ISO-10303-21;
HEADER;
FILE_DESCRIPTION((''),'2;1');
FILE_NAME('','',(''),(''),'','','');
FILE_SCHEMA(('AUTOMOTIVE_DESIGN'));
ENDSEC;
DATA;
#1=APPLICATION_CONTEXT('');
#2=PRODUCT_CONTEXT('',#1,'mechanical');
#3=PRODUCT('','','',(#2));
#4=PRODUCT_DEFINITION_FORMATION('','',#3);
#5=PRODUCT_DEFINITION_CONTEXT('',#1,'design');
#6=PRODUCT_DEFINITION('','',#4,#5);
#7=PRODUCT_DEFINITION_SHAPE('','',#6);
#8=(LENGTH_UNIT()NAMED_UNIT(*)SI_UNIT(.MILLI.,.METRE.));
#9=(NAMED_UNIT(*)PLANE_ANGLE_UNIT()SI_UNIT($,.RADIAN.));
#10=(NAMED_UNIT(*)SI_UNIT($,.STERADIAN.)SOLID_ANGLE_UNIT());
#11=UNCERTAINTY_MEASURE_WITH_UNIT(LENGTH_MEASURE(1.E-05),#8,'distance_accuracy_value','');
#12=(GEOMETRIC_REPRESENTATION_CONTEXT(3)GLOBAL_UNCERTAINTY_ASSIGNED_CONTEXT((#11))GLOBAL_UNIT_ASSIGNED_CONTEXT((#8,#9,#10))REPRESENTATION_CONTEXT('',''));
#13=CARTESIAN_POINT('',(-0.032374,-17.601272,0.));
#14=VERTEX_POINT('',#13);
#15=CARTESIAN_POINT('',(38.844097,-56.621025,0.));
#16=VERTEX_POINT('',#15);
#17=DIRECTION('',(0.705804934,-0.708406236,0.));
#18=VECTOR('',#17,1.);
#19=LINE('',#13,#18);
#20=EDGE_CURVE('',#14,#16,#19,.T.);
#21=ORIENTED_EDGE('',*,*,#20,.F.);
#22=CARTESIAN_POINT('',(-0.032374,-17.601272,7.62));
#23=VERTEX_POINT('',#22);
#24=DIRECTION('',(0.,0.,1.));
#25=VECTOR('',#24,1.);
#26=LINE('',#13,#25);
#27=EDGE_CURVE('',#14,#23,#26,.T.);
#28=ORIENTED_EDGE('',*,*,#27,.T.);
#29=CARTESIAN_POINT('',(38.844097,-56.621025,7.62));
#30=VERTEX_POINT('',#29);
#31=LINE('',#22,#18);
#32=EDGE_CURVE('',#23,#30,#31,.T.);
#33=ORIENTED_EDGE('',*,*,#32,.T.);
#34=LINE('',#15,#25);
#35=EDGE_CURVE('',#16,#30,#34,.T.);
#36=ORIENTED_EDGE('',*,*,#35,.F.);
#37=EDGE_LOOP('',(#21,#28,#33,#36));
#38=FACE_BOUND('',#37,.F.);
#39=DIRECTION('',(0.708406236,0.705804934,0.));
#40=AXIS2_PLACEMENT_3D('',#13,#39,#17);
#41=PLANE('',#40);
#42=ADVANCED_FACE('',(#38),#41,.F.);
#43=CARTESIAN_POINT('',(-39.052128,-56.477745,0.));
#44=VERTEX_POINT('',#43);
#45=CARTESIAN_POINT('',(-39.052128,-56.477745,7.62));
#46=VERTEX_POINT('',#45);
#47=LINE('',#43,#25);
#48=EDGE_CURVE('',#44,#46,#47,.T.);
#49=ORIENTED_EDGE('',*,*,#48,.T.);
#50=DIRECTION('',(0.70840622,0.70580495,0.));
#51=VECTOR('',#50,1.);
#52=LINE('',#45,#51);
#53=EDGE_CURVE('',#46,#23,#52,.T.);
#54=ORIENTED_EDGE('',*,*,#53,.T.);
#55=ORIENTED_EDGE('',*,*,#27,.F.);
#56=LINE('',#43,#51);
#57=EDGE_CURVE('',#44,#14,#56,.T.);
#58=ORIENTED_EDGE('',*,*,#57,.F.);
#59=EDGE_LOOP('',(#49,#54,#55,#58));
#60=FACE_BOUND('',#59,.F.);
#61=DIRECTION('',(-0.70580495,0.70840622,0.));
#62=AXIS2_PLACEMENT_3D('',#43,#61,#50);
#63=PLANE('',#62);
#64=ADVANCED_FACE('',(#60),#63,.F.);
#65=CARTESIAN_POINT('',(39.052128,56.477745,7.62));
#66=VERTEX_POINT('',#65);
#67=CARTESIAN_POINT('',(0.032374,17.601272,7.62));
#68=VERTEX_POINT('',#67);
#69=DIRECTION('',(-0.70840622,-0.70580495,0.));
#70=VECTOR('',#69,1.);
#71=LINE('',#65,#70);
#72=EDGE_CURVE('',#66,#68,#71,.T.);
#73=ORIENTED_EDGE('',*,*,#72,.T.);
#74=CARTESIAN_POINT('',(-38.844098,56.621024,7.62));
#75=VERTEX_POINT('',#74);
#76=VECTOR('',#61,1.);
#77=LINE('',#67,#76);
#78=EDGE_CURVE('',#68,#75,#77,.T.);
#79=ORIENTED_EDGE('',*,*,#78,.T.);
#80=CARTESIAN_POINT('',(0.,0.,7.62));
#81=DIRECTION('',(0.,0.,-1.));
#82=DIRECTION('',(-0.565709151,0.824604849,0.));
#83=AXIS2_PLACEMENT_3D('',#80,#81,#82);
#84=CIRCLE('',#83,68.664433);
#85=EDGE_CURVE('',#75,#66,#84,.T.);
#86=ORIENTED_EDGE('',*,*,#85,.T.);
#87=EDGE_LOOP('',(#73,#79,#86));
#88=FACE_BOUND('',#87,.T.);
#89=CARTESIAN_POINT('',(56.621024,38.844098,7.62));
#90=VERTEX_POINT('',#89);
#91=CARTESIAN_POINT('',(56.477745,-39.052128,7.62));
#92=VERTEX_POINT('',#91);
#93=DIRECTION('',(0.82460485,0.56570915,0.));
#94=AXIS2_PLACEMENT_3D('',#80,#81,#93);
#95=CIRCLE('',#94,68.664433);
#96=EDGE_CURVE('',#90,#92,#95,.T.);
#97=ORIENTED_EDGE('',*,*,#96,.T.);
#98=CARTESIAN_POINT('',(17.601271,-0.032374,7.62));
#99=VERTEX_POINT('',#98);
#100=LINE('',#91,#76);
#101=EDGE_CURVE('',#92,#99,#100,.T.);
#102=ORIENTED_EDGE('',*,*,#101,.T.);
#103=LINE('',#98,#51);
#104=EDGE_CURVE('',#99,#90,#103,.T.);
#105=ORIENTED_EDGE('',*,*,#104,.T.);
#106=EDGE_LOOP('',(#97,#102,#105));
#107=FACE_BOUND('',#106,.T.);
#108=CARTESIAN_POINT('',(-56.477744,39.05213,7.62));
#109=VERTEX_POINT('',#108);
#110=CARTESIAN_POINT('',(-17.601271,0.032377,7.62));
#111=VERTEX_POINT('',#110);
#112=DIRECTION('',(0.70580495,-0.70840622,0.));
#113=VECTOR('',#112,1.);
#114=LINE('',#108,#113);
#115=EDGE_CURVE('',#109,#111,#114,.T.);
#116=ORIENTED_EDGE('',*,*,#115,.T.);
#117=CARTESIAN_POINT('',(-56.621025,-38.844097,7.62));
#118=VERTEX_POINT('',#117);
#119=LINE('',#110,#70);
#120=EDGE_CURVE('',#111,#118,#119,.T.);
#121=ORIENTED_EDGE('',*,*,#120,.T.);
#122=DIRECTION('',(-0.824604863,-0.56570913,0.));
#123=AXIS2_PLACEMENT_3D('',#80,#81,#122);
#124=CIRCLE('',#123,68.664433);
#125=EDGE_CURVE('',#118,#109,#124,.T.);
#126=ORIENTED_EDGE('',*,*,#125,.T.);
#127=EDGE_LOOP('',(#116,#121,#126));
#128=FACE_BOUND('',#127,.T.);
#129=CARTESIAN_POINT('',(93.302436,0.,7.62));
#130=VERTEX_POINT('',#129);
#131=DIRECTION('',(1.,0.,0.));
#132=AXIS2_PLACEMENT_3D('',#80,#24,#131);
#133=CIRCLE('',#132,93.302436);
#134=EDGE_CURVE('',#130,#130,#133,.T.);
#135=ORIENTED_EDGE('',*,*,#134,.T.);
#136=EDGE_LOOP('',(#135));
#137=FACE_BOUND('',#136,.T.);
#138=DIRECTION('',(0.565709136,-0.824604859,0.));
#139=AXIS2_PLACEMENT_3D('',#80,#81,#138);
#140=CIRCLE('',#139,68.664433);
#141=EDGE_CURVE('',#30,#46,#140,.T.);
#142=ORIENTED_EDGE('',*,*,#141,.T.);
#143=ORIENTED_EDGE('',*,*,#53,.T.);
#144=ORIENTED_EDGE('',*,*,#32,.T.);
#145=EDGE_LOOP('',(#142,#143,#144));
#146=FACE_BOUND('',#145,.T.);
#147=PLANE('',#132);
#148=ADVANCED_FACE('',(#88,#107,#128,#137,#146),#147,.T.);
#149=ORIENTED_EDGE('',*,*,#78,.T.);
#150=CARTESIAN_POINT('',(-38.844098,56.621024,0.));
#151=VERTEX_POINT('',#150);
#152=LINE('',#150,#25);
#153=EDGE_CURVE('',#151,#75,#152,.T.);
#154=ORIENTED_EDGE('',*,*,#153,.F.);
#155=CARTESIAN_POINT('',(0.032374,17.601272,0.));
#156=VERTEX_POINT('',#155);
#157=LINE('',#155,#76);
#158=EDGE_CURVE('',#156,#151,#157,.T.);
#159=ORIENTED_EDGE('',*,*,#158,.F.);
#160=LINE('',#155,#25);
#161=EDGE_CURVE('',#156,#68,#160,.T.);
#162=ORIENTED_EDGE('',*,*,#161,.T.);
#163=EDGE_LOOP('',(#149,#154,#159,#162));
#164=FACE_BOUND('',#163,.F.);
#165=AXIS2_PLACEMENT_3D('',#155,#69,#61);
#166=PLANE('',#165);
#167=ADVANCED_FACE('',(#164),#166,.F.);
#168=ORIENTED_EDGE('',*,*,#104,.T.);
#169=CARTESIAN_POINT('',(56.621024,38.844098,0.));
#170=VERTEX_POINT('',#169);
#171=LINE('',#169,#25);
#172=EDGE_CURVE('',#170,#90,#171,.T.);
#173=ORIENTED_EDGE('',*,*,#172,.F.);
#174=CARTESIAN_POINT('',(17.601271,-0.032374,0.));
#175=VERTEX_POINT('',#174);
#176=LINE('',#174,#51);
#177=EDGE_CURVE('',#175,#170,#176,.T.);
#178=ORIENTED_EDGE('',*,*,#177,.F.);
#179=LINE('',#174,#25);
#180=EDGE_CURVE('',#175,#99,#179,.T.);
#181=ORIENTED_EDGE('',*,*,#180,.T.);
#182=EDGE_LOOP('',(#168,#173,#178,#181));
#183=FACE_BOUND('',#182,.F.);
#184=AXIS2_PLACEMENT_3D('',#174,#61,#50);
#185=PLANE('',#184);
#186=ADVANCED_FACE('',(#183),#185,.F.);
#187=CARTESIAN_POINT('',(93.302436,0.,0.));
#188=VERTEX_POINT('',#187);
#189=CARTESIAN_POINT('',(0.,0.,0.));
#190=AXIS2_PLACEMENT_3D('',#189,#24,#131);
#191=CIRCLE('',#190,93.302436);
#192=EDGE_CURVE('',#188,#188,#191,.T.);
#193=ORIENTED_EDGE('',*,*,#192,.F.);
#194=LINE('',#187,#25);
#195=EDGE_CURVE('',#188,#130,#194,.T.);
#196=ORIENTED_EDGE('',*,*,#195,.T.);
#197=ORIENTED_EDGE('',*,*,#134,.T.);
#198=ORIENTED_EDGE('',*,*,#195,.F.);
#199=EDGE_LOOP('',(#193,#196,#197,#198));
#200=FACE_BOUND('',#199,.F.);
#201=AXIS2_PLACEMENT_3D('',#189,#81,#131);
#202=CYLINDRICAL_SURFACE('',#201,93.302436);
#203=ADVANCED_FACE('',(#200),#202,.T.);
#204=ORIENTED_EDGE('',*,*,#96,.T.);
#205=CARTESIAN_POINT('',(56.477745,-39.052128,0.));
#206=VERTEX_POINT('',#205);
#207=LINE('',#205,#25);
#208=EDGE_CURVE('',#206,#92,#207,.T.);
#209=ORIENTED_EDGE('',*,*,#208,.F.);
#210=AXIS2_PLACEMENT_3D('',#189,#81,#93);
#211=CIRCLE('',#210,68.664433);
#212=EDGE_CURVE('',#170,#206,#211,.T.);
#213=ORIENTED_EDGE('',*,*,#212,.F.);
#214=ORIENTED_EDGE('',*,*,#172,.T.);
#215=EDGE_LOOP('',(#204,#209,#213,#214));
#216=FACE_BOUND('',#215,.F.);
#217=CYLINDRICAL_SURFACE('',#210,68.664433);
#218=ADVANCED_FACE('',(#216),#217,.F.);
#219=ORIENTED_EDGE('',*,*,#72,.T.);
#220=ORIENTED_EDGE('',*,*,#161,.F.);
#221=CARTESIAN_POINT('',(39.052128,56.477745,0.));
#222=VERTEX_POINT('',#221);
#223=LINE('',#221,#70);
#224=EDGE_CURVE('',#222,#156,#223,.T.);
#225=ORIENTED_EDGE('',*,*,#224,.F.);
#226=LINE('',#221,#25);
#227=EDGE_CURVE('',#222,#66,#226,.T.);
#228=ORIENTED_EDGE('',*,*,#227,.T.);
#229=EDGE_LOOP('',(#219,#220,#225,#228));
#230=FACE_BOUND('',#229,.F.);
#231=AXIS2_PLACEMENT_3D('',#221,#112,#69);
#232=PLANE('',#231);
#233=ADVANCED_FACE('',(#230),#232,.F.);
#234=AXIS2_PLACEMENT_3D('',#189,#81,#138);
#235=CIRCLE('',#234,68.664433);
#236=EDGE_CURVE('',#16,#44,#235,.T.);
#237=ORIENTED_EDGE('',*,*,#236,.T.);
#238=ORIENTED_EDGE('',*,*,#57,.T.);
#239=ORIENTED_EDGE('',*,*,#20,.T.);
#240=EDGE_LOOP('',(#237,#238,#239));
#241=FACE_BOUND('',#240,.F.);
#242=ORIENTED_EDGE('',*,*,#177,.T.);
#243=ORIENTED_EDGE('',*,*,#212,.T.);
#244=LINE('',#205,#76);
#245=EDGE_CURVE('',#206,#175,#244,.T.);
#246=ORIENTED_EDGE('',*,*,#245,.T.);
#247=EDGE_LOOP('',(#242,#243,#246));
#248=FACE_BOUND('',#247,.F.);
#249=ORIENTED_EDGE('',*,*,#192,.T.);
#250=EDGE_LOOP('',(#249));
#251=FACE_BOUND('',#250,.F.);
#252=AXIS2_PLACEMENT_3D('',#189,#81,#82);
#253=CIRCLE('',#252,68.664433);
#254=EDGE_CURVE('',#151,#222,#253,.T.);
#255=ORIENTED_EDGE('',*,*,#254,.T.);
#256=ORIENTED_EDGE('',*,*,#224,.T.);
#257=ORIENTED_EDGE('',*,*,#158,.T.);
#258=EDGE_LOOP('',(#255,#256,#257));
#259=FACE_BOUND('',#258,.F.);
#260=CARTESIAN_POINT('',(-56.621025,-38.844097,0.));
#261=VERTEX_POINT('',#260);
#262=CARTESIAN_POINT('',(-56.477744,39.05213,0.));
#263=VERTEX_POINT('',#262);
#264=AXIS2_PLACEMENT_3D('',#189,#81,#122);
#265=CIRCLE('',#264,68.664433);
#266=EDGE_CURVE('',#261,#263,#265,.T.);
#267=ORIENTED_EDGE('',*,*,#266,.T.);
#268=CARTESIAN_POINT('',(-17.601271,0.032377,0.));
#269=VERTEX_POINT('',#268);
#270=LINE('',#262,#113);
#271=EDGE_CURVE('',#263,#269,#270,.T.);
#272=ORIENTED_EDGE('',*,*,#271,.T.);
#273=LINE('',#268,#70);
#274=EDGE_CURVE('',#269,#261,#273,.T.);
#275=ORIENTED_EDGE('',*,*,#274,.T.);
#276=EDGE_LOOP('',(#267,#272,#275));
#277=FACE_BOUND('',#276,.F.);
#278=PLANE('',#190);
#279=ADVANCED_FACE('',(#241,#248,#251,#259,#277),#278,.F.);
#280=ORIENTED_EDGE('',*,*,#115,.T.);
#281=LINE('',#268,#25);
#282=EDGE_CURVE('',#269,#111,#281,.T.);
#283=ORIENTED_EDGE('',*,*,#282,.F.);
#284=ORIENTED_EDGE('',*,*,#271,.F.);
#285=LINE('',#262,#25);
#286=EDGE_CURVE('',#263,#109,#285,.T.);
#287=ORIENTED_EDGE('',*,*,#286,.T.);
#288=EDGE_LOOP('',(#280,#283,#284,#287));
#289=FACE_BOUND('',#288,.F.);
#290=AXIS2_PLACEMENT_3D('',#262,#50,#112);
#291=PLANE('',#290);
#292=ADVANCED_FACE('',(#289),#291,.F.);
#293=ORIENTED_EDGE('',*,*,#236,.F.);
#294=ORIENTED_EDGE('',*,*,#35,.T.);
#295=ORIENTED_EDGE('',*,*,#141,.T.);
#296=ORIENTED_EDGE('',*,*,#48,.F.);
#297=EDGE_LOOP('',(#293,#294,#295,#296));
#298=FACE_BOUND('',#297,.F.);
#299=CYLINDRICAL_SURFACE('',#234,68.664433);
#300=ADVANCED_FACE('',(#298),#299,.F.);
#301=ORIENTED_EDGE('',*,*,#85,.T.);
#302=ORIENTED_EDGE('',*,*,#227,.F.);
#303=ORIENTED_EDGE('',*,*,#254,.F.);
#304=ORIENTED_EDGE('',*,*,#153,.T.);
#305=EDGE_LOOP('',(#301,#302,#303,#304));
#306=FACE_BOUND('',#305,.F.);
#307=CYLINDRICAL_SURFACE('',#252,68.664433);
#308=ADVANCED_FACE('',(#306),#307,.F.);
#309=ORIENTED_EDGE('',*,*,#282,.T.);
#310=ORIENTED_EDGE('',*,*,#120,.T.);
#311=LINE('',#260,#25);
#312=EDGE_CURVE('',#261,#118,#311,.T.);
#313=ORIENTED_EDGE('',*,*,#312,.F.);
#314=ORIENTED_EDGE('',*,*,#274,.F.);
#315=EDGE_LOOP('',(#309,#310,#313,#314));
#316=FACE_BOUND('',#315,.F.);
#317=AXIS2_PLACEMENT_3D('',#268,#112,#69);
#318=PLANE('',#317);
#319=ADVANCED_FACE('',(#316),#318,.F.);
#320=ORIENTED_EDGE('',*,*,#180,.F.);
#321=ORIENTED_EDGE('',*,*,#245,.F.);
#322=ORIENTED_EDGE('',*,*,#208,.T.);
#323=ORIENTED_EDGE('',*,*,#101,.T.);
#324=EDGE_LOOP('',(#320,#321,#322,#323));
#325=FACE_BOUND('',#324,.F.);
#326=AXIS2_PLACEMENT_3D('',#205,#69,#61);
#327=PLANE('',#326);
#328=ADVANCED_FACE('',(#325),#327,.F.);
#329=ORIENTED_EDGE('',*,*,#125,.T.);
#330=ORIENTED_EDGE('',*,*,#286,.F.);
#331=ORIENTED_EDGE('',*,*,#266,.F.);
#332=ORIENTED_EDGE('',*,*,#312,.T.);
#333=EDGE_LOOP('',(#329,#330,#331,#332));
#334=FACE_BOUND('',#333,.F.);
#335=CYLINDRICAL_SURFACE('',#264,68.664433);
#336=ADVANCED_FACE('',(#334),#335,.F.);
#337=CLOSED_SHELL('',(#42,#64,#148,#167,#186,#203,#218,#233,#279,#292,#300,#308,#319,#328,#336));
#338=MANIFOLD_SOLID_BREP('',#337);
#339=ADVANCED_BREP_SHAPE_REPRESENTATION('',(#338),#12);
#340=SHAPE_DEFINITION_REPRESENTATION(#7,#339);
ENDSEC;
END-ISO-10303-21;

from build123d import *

# Parameters (mm, degrees)
F0_R     = 93.302436173
F1_DEPTH = 7.62


# Not quite as in the source:
# - ends of sketch curves that miss each other by under 0.0002 mm in the source are joined


with BuildPart() as f1:
    # F0 (on Top) → F1 (new body)
    with BuildSketch(Plane.XY):
        Circle(F0_R)
        with BuildLine():
            Line((-39.0521280378, -56.4777448198), (-0.032374081, -17.6012715653))
            Line((-0.032374081, -17.6012715653), (38.8440970553, -56.6210251423))
            ThreePointArc((38.8440970553, -56.6210251423), (-0.1262993869, -68.6643168805), (-39.0521280378, -56.4777448198))
        make_face(mode=Mode.SUBTRACT)
        with BuildLine():
            Line((56.477744538, -39.0521284453), (17.6012712801, -0.0323744851))
            Line((17.6012712801, -0.0323744851), (56.6210244822, 38.8440980175))
            ThreePointArc((56.6210244822, 38.8440980175), (68.6643168811, -0.1262990512), (56.477744538, -39.0521284453))
        make_face(mode=Mode.SUBTRACT)
        with BuildLine():
            ThreePointArc((-56.6210254, -38.8440966797), (-68.6643168783, 0.1263005725), (-56.4777437302, 39.0521296136))
            Line((-56.4777437302, 39.0521296136), (-17.6012714166, 0.0323766012))
            Line((-17.6012714166, 0.0323766012), (-56.6210254, -38.8440966797))
        make_face(mode=Mode.SUBTRACT)
        with BuildLine():
            Line((39.0521279012, 56.4777449142), (0.0323739658, 17.601271681))
            Line((0.0323739658, 17.601271681), (-38.8440980887, 56.6210244334))
            ThreePointArc((-38.8440980887, 56.6210244334), (0.1262986773, 68.6643168818), (39.0521279012, 56.4777449142))
        make_face(mode=Mode.SUBTRACT)
    extrude(amount=F1_DEPTH)


solid = f1.part
